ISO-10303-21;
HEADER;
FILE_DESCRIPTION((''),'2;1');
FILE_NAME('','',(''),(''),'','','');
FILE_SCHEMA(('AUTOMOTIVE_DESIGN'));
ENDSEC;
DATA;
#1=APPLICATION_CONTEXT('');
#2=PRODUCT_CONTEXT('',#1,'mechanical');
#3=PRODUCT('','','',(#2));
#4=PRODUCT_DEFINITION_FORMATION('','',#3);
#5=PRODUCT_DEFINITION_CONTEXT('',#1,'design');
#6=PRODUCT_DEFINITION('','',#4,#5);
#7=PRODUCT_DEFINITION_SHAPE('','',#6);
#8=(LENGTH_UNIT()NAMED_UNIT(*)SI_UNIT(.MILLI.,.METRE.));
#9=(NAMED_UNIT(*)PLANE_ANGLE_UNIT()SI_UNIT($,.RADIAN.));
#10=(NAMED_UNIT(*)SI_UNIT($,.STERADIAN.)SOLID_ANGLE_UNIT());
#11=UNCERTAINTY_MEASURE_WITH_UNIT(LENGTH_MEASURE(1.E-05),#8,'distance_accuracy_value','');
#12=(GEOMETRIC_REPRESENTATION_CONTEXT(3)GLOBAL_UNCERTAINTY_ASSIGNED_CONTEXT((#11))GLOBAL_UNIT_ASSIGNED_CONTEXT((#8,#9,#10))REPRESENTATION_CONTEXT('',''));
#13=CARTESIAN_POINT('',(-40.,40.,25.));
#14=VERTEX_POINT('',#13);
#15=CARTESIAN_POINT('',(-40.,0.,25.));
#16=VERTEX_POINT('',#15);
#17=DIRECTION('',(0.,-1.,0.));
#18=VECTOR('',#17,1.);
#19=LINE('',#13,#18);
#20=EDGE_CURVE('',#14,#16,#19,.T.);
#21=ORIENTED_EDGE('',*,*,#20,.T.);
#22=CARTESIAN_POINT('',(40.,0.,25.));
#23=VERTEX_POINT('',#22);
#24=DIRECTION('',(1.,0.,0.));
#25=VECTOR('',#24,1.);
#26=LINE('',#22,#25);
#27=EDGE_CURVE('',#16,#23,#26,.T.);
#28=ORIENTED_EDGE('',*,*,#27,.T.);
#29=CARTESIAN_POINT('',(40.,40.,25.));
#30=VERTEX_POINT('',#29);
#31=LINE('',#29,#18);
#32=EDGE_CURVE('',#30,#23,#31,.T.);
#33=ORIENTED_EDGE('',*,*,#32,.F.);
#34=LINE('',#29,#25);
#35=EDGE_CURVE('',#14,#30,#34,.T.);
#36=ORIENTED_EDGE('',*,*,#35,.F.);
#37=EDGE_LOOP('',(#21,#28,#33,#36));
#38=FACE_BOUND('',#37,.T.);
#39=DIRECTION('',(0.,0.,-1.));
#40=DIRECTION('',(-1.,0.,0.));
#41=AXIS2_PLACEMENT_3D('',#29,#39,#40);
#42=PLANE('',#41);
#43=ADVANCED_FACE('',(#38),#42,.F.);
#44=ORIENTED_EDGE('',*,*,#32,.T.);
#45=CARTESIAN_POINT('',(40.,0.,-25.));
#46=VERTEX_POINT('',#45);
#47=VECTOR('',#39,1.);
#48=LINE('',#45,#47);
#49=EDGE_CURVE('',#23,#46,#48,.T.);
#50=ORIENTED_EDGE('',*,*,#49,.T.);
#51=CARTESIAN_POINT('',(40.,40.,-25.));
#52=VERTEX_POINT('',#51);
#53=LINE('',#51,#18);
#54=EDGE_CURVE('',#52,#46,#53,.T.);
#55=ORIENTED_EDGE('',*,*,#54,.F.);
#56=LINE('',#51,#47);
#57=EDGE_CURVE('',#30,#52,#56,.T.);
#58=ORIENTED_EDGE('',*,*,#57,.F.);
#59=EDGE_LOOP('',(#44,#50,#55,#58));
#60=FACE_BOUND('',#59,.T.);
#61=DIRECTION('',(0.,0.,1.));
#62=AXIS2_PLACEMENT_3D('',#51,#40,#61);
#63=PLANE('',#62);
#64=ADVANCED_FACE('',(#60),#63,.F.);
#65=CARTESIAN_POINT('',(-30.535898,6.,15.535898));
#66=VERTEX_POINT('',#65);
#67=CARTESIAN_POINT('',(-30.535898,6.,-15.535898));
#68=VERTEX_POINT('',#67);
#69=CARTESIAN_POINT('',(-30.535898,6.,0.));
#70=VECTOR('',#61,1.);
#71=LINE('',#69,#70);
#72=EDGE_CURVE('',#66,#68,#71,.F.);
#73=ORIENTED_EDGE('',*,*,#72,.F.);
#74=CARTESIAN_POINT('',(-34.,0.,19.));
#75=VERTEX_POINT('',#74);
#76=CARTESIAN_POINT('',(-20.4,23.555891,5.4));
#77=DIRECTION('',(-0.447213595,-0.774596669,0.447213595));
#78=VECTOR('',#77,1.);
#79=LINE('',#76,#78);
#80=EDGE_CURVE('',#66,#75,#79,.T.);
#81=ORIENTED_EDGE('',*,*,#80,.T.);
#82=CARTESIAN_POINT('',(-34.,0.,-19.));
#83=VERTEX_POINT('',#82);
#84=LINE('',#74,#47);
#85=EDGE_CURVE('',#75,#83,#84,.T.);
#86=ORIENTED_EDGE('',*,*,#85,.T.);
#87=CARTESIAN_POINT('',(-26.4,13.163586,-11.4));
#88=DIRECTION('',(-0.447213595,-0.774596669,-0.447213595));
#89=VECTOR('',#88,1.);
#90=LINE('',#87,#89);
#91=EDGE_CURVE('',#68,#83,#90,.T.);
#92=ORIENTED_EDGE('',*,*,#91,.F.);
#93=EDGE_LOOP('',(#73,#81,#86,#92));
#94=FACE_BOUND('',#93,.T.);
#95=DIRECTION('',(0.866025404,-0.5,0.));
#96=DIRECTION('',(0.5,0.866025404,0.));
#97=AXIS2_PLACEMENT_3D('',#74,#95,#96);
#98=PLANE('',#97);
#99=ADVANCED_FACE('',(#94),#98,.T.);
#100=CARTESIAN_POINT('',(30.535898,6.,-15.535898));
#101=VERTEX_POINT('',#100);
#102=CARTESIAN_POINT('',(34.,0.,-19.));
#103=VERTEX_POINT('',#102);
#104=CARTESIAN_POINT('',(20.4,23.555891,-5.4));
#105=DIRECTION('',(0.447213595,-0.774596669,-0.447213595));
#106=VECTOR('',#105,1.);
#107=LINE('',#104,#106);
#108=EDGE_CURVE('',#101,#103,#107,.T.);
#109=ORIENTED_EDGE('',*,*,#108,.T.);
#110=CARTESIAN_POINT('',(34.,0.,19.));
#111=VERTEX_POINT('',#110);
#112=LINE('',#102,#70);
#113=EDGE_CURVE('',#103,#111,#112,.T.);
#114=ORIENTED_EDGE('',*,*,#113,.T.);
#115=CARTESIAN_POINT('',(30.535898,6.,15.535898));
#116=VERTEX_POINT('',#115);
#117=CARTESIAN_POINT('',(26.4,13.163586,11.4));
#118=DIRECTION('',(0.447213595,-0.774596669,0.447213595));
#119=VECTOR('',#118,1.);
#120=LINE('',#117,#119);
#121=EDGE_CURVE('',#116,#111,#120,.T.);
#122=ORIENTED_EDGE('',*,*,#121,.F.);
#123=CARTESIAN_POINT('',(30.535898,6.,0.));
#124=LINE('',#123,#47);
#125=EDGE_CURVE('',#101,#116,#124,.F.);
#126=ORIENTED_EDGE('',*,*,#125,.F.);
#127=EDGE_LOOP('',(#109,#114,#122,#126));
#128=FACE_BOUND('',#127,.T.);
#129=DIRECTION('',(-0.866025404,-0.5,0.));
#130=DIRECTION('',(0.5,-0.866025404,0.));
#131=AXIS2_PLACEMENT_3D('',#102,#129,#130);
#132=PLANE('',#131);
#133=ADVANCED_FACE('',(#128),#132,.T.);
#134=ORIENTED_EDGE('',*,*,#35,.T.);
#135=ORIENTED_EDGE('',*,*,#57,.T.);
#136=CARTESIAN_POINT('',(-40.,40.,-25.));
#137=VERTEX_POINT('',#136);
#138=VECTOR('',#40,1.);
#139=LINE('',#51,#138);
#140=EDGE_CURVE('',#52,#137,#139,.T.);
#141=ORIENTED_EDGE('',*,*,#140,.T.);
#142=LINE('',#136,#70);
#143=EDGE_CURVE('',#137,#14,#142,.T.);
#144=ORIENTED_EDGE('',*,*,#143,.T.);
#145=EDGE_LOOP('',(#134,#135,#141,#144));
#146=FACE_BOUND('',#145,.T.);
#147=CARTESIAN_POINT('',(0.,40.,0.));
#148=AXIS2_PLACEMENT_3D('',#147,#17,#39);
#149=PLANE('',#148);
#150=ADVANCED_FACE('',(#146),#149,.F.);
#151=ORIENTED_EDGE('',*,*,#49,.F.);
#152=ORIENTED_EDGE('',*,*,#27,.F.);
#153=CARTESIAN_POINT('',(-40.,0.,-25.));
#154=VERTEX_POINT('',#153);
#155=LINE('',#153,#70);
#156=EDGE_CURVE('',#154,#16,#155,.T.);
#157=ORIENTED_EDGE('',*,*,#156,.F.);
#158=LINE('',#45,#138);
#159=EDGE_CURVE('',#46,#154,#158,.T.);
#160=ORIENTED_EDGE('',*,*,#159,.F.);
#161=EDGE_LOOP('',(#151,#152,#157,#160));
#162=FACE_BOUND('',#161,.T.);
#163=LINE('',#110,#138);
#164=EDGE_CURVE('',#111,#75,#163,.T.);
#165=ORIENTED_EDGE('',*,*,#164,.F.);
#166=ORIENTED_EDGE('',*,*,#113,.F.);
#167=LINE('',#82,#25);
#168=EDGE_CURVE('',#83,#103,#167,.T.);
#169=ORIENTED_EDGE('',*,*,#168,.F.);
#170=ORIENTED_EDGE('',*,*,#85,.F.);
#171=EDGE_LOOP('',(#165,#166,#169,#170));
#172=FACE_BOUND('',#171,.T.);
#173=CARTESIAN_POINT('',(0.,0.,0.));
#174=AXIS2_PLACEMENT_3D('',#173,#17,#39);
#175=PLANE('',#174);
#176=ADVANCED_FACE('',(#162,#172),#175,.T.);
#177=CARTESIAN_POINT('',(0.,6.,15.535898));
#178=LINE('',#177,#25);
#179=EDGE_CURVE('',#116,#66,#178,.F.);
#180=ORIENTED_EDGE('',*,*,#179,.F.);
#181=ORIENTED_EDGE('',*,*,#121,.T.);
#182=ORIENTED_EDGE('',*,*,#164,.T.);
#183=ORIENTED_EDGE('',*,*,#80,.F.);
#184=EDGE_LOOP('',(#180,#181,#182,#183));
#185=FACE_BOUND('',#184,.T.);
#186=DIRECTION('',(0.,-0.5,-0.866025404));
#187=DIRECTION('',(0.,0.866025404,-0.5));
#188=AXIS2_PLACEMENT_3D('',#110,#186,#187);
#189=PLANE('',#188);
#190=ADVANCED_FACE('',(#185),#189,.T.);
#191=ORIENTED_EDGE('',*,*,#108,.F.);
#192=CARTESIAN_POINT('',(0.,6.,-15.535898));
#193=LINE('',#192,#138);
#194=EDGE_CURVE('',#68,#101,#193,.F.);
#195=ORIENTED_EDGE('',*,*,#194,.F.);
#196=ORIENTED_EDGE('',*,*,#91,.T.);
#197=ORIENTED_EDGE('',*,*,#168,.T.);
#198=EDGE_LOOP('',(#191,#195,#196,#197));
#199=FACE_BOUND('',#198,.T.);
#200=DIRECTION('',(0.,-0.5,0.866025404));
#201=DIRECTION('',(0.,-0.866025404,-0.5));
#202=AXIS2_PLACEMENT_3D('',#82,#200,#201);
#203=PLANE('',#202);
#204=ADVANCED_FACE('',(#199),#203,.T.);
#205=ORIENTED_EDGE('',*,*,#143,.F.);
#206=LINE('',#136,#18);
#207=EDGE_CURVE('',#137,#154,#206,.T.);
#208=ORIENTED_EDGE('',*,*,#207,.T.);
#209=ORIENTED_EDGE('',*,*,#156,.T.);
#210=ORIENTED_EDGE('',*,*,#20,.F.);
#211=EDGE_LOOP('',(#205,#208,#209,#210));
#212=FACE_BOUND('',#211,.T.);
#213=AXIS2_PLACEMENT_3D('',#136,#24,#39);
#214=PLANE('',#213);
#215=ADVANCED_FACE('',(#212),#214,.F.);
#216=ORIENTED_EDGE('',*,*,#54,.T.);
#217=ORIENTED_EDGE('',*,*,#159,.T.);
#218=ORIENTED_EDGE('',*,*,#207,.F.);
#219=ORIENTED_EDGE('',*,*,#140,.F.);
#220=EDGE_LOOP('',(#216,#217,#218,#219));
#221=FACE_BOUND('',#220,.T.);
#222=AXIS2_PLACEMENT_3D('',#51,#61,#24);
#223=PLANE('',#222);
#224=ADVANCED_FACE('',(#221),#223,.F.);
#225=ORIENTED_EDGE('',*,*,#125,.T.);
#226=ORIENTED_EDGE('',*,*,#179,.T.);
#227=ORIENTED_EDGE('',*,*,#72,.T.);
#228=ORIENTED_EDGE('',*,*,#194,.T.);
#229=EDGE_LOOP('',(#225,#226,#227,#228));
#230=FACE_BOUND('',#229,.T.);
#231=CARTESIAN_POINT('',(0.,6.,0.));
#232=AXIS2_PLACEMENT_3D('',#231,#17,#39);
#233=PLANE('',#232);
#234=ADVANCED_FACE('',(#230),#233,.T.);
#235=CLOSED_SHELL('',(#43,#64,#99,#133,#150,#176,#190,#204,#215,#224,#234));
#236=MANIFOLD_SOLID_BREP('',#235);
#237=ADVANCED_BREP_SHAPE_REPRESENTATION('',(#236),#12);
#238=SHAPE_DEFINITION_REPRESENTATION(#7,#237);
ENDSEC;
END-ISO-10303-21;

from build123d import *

# Parameters (mm, degrees)
SKETCH2_W           = 80
SKETCH2_H           = 50
BOSS_EXTRUDE1_DEPTH = 40
SKETCH3_W           = 68
SKETCH3_H           = 38
CUT_EXTRUDE1_DEPTH  = 6
DRAFT1_START        = -34
DRAFT1_DEPTH        = 68
DRAFT1_START_2      = -20
DRAFT1_2_DEPTH      = 40


with BuildPart() as part:
    # Sketch2 → Boss-Extrude1 (new body)
    with BuildSketch(Plane(origin=(0, 0, 0), x_dir=(1, 0, 0), z_dir=(0, 1, 0))):
        Rectangle(SKETCH2_W, SKETCH2_H)
    extrude(amount=BOSS_EXTRUDE1_DEPTH)

    # Sketch3 → Cut-Extrude1 (cut)
    with BuildSketch(Plane.XZ):
        Rectangle(SKETCH3_W, SKETCH3_H)
    extrude(amount=-CUT_EXTRUDE1_DEPTH, mode=Mode.SUBTRACT)

    # Draft1: read off the stored shape, not the designer's step
    # Draft1 outline → Draft1 (add)
    with BuildSketch(Plane.YZ.offset(DRAFT1_START)):
        Polygon((6, 19), (0, 19), (6, 15.535898385), align=None)
        Polygon((6, -19), (6, -15.535898385), (0, -19), align=None)
    extrude(amount=DRAFT1_DEPTH)

    # Draft1 2 outline → Draft1 2 (add)
    with BuildSketch(Plane.XY.offset(DRAFT1_START_2)):
        Polygon((34, 6), (30.535898385, 6), (34, 0), align=None)
        Polygon((-34, 0), (-30.535898385, 6), (-34, 6), align=None)
    extrude(amount=DRAFT1_2_DEPTH)


solid = part.part
